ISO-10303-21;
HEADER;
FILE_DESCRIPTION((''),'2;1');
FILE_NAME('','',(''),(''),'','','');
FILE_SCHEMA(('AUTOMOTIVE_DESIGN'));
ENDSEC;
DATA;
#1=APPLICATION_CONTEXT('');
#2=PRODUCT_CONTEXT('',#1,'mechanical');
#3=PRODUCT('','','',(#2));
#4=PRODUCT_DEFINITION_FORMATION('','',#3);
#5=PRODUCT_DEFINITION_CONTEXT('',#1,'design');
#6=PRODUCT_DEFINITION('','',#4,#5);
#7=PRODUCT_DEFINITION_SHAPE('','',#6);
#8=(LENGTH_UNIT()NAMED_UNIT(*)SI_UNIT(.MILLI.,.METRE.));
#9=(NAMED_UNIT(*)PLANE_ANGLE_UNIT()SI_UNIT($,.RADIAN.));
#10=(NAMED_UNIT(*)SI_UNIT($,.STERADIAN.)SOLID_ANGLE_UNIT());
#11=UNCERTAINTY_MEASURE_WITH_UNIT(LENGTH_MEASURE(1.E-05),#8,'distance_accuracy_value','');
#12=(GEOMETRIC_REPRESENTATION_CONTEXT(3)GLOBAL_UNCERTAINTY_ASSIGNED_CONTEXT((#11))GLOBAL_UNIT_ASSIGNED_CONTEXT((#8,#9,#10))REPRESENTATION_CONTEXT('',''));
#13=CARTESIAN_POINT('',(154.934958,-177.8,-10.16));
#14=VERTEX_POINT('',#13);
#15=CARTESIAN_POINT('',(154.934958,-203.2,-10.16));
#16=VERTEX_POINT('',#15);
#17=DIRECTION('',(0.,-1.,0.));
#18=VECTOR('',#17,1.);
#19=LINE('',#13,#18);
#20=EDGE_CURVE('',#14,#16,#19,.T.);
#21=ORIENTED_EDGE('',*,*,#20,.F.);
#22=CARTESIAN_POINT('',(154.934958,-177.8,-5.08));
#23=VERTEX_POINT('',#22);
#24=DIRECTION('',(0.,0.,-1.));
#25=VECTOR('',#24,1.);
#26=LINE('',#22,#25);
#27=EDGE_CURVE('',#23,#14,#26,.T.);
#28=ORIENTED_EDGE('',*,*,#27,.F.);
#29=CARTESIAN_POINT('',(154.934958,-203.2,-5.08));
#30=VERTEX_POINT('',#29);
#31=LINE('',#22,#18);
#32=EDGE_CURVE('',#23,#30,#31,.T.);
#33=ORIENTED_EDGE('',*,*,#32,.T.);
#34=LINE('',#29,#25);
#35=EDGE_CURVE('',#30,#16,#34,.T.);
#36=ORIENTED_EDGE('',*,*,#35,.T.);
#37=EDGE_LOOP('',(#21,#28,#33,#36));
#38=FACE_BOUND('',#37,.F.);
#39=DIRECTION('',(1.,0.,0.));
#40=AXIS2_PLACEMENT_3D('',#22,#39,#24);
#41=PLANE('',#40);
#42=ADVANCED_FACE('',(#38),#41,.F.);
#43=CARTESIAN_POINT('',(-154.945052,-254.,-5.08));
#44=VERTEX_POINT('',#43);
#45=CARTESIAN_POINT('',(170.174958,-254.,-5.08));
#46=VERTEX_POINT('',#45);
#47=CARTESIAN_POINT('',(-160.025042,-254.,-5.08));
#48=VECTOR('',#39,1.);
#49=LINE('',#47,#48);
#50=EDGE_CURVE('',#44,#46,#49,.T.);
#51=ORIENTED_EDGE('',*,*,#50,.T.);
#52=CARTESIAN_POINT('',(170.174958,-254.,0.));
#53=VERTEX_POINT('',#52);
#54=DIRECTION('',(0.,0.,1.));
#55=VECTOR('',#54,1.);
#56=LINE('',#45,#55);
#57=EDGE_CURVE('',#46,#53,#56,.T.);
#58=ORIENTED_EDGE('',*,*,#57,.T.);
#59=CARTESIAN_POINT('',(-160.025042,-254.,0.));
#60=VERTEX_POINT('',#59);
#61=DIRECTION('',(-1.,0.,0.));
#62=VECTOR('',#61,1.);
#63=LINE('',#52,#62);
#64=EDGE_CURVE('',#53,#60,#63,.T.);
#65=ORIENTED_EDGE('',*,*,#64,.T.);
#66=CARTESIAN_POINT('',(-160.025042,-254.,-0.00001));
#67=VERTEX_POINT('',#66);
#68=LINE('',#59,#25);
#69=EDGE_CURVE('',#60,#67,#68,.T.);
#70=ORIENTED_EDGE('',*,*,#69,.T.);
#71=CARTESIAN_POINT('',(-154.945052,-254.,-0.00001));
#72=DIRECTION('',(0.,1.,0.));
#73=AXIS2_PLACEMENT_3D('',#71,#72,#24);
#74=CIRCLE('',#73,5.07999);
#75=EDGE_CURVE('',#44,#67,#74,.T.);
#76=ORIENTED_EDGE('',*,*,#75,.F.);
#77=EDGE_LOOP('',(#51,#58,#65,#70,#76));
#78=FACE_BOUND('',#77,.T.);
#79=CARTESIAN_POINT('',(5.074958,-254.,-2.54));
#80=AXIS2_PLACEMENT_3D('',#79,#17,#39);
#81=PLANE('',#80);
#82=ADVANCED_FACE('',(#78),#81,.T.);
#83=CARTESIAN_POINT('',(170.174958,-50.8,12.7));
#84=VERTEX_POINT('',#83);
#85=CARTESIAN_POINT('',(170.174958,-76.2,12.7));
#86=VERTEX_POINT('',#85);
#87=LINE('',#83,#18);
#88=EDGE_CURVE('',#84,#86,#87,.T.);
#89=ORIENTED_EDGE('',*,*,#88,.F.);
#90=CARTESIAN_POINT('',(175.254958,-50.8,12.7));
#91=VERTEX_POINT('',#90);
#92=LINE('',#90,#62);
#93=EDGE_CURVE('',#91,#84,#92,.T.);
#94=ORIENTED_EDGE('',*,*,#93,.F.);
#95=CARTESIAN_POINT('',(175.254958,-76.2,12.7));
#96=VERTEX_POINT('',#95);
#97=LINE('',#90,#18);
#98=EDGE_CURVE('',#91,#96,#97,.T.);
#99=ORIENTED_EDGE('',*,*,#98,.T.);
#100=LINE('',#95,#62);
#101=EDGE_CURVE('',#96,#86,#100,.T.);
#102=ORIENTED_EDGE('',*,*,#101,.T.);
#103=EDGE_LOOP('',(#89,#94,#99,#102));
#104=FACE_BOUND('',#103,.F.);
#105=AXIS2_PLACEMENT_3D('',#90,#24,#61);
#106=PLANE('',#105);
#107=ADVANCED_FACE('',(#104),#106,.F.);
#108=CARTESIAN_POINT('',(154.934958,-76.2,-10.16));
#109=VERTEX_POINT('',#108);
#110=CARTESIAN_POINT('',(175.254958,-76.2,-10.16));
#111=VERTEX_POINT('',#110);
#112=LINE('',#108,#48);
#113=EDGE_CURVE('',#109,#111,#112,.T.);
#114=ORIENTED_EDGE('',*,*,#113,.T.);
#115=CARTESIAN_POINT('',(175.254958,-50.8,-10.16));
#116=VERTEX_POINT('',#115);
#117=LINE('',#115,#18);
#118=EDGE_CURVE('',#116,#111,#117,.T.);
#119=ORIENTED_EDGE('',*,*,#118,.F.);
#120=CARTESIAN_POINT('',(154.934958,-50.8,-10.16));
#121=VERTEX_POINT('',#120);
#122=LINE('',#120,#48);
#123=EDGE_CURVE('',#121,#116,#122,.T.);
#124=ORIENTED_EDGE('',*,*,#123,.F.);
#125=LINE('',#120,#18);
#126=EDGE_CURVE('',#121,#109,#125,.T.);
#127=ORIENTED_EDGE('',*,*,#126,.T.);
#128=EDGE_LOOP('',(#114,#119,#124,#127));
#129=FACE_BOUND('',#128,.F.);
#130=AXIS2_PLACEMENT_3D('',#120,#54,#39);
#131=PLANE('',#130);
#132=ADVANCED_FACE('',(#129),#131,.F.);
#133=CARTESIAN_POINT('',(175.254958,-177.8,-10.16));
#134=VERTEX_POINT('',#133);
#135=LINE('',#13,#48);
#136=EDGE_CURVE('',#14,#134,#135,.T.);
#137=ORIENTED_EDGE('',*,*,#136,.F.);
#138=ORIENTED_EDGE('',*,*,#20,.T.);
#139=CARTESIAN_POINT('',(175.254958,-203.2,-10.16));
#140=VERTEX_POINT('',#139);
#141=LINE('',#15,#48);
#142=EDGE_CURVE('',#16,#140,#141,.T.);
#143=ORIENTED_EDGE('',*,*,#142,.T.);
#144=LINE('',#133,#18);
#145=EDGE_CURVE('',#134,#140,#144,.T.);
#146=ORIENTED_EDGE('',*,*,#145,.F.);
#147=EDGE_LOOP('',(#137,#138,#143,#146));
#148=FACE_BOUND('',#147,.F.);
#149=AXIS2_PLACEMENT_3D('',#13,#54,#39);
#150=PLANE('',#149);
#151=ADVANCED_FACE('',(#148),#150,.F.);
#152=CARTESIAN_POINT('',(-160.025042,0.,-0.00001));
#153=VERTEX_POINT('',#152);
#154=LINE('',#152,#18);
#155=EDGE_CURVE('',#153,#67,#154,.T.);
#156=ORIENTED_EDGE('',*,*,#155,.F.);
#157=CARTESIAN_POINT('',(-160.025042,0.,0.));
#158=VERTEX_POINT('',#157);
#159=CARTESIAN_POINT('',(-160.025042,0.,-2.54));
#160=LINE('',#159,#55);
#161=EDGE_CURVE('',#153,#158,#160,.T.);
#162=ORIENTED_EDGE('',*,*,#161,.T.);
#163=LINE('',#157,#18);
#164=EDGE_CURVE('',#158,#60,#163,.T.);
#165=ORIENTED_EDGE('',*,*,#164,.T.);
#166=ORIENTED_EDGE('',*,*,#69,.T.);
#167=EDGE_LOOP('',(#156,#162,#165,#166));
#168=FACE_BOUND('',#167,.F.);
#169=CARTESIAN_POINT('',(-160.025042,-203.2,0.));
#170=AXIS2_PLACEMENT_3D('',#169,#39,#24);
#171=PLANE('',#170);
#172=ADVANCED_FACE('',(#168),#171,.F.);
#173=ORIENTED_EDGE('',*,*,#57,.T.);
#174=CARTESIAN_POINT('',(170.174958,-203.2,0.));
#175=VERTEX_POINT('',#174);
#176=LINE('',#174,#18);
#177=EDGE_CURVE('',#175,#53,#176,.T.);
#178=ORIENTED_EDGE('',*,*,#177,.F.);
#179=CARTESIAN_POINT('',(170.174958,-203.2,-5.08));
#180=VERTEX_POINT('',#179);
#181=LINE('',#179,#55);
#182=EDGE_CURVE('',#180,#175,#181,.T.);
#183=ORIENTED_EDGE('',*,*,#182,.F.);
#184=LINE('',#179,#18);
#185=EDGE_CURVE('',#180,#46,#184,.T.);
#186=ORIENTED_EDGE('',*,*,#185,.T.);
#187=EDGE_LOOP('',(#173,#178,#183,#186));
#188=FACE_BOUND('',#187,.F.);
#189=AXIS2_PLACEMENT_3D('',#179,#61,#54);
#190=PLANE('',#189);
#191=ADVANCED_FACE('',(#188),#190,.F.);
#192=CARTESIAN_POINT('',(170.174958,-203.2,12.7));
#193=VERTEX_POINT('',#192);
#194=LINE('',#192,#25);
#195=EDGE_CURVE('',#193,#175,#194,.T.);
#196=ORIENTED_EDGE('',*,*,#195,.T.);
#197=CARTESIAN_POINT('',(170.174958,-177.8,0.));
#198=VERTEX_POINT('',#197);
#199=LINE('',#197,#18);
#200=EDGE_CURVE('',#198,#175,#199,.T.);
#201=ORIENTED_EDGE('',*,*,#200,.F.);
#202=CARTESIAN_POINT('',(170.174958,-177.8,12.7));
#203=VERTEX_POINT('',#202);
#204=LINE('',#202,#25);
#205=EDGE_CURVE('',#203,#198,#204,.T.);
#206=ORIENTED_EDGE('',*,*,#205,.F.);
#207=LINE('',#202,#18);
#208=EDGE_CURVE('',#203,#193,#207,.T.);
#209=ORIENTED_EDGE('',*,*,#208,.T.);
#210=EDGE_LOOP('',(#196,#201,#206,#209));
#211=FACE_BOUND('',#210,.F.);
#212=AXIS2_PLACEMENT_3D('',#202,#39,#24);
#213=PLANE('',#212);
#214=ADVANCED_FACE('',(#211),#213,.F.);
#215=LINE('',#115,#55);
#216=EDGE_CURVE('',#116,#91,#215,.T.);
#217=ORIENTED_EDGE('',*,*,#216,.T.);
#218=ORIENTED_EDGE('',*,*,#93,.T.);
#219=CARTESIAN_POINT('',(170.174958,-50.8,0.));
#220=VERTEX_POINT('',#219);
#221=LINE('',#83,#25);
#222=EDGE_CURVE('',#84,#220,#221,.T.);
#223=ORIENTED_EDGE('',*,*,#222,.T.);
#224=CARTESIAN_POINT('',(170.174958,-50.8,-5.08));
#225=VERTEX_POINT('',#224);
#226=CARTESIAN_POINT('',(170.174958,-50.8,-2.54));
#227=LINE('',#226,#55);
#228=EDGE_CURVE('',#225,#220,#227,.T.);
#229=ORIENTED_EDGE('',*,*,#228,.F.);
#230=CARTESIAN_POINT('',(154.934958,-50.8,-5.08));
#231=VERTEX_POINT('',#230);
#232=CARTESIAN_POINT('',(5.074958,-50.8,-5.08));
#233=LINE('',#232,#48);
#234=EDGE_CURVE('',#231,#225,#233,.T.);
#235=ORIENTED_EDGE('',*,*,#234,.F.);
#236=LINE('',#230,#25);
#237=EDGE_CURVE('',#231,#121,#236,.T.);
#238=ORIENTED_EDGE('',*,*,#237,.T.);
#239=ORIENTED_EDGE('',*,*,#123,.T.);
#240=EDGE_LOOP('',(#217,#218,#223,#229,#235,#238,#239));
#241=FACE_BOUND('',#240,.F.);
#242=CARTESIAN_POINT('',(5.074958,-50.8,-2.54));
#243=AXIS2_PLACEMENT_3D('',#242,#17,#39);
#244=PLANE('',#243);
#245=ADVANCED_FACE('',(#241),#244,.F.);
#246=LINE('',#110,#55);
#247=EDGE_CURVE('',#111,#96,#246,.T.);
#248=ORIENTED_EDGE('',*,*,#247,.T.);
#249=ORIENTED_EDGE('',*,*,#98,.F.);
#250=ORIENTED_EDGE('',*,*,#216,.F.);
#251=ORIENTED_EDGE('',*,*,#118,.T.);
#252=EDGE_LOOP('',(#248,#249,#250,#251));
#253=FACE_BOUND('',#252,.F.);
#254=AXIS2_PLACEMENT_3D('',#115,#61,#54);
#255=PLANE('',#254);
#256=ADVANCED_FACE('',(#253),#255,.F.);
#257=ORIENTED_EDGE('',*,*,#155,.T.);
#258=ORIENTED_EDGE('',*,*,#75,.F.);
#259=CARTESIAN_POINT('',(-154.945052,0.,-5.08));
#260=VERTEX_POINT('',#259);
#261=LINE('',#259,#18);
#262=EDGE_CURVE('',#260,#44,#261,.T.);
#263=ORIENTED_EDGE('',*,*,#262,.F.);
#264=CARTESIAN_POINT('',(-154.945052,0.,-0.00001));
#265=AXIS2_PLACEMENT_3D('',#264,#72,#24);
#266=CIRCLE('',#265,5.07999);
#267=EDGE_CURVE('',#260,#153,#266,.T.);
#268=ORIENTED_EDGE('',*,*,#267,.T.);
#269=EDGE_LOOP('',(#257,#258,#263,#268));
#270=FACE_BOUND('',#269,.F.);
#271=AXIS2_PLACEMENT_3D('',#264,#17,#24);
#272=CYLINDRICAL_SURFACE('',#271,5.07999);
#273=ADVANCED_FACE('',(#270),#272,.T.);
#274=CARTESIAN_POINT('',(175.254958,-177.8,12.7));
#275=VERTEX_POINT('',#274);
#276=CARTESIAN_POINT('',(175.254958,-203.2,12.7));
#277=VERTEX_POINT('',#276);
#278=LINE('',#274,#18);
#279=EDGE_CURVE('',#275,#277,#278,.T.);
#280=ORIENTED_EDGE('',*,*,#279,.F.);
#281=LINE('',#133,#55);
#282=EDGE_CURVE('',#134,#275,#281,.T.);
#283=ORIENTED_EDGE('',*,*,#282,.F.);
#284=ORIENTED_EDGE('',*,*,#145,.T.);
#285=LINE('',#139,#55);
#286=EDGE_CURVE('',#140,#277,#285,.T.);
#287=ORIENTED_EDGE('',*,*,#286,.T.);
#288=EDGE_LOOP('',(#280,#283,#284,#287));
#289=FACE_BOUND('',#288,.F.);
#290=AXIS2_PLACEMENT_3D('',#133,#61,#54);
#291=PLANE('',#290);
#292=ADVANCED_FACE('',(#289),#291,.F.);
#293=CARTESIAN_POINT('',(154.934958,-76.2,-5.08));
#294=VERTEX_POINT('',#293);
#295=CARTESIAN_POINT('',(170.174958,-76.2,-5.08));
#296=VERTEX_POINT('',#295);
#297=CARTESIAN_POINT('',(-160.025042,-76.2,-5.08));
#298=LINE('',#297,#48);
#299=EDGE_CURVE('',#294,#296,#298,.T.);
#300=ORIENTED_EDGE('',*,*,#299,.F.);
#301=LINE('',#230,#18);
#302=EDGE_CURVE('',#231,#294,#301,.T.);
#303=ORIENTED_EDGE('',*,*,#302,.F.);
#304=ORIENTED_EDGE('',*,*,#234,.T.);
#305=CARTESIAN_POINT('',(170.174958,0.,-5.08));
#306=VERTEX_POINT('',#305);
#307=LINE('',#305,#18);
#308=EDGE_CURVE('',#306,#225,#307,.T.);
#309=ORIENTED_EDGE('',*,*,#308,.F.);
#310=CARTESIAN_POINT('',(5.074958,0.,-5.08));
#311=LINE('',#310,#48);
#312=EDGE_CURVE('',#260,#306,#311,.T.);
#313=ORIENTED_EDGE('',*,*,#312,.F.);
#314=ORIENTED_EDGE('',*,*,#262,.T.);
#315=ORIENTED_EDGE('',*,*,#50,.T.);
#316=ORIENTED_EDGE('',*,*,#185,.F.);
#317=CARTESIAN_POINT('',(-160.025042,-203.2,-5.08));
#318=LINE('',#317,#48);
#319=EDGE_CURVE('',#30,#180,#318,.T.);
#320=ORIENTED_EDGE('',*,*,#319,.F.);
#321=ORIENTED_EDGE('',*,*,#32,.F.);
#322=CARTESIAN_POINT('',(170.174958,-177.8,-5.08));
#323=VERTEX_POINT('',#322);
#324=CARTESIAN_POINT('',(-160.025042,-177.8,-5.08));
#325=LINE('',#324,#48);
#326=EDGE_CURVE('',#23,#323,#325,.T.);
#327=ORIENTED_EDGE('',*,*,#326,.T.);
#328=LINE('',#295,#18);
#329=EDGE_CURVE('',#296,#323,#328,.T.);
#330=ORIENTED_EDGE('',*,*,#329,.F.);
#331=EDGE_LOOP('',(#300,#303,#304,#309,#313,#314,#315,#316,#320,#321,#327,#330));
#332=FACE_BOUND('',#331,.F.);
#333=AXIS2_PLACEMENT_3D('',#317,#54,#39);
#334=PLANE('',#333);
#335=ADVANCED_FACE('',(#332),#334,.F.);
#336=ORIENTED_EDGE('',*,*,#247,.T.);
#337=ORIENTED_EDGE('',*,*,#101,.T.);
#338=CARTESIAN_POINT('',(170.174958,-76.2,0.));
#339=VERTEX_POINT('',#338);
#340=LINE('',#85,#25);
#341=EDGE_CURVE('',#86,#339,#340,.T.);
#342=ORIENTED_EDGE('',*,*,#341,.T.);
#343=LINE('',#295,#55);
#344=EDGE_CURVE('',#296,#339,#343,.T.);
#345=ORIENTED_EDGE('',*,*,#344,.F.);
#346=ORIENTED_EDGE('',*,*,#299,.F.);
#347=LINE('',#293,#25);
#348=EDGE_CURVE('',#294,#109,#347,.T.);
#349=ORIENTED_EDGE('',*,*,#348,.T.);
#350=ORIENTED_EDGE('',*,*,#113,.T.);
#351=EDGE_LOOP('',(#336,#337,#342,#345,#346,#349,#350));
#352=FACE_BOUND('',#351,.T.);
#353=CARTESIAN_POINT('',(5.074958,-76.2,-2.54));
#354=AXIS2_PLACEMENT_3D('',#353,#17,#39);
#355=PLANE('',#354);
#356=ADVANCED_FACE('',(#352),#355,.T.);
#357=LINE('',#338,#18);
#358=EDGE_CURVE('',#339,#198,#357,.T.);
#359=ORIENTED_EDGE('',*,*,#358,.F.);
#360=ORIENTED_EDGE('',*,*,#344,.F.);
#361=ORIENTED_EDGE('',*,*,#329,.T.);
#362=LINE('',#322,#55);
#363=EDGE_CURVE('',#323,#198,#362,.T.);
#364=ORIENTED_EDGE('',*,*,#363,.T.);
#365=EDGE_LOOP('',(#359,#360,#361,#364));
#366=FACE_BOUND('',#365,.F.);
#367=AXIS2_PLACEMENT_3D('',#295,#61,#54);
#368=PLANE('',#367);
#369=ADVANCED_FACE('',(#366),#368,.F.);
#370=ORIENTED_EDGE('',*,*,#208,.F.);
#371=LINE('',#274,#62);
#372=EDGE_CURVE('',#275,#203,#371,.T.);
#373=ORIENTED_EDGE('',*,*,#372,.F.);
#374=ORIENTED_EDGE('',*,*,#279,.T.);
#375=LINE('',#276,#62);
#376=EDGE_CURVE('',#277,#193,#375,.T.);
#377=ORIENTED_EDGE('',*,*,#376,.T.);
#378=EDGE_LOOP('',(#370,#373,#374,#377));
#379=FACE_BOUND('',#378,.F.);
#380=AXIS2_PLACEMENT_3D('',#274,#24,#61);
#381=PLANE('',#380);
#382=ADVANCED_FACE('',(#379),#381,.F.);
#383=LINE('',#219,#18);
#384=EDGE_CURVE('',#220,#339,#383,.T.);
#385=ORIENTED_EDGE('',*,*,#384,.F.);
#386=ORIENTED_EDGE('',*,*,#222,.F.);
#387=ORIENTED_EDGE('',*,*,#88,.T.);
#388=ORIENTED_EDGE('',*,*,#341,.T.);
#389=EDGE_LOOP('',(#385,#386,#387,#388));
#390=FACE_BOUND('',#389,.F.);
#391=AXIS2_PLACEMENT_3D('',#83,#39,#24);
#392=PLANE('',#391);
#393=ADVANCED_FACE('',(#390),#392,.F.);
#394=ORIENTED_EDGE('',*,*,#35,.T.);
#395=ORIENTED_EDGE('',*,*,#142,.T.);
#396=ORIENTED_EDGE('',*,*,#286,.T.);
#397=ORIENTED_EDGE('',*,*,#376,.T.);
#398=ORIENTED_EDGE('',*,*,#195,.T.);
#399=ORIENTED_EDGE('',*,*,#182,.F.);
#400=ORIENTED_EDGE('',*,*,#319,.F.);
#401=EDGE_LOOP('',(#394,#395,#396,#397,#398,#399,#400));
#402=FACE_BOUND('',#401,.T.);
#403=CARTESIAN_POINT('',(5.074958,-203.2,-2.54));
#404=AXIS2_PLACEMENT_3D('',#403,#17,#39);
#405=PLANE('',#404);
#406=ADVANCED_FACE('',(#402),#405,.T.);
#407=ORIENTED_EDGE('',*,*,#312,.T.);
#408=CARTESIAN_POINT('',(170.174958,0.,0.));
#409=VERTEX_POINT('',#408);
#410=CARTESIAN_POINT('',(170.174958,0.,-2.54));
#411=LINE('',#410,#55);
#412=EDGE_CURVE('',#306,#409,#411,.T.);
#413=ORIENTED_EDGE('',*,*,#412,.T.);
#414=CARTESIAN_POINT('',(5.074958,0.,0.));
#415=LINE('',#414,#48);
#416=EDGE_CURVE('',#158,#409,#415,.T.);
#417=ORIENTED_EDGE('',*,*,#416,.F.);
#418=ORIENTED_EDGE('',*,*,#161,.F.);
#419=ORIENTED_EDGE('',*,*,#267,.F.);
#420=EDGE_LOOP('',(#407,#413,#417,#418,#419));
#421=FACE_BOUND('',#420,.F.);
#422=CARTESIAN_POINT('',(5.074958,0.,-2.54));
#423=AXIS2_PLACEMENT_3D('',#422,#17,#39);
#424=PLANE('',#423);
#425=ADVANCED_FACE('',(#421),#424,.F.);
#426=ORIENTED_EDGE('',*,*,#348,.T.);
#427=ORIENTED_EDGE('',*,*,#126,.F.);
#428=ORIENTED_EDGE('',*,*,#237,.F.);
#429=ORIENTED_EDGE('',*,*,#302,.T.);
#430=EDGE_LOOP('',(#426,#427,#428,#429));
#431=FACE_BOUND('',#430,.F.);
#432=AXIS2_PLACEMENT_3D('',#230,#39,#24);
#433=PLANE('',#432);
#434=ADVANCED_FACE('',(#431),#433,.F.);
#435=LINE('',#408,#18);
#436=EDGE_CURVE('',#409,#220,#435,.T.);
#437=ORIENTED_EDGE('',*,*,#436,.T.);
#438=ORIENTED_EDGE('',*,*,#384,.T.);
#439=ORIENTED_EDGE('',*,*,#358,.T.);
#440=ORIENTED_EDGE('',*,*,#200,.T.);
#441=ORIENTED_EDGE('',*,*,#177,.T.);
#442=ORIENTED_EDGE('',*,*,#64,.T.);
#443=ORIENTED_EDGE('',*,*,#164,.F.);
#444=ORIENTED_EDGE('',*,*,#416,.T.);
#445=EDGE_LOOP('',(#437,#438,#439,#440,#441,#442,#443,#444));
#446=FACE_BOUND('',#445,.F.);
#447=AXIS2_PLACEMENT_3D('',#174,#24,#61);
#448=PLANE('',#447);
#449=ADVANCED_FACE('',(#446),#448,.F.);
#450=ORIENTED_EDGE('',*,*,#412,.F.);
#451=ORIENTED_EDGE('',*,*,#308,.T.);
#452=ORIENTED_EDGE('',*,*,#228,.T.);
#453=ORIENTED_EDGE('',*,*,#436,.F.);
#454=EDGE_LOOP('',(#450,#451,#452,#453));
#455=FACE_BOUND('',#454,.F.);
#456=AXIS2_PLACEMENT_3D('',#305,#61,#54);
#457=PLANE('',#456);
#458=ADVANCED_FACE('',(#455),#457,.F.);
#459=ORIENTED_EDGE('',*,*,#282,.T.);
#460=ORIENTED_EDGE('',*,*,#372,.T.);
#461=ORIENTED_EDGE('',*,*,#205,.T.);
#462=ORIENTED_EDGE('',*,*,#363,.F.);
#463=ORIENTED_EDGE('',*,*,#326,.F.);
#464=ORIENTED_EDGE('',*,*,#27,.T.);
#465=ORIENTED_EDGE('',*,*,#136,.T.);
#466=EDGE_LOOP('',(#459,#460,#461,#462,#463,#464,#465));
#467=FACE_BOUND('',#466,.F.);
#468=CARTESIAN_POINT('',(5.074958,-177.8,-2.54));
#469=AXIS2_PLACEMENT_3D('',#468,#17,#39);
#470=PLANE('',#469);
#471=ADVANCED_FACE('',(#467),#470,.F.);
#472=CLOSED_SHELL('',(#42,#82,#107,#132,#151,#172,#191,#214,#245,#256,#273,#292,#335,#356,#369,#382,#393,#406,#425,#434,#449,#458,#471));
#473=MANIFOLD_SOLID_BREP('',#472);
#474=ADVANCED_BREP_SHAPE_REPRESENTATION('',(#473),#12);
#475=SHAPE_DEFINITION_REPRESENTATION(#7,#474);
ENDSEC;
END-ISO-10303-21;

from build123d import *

# Parameters (mm, degrees)
F0_W     = 330.2
F0_H     = 5.08
F1_DEPTH = 50.8
F3_DEPTH = 25.4
F5_DEPTH = 101.6
F7_DEPTH = 25.4
F9_DEPTH = 50.8
F10_R    = 5.07999


# Not quite as in the source:
# - a fillet or chamfer is up to 0.001 mm smaller than in the source, because OpenCascade refuses the exact size


with BuildPart() as f1:
    # F0 (on Front) → F1 (new body)
    with BuildSketch(Plane.XZ):
        with Locations((5.0749575138, -2.54)):
            Rectangle(F0_W, F0_H)
    extrude(amount=F1_DEPTH)

    # F2 (on face) → F3 (join)
    with BuildSketch(Plane.XZ.offset(50.8)):
        Polygon((170.1749575138, -5.08), (170.1749575138, 0), (-160.0250424862, 0), (-160.0250424862, -5.08), (154.9349575138, -5.08), align=None)
        Polygon((170.1749575138, 12.7), (170.1749575138, 0), (170.1749575138, -5.08), (154.9349575138, -5.08), (154.9349575138, -10.16), (175.2549575138, -10.16), (175.2549575138, 12.7), align=None)
    extrude(amount=F3_DEPTH)

    # F4 (on face) → F5 (join)
    with BuildSketch(Plane.XZ.offset(76.2)):
        Polygon((170.1749575138, 0), (-160.0250424862, 0), (-160.0250424862, -5.08), (154.9349575138, -5.08), (170.1749575138, -5.08), align=None)
    extrude(amount=F5_DEPTH)

    # F6 (on face) → F7 (join)
    with BuildSketch(Plane.XZ.offset(177.8)):
        Polygon((170.1749575138, -5.08), (170.1749575138, 0), (-160.0250424862, 0), (-160.0250424862, -5.08), (154.9349575138, -5.08), align=None)
        Polygon((170.1749575138, 12.7), (170.1749575138, 0), (170.1749575138, -5.08), (154.9349575138, -5.08), (154.9349575138, -10.16), (175.2549575138, -10.16), (175.2549575138, 12.7), align=None)
    extrude(amount=F7_DEPTH)

    # F8 (on face) → F9 (join)
    with BuildSketch(Plane.XZ.offset(203.2)):
        Polygon((170.1749575138, 0), (-160.0250424862, 0), (-160.0250424862, -5.08), (154.9349575138, -5.08), (170.1749575138, -5.08), align=None)
    extrude(amount=F9_DEPTH)

    # F10 (radius 5.08 in the source; OpenCascade refuses exactly that, so slightly less here)
    f10_edges = [f1.edges().sort_by_distance(p)[0] for p in [
        (-160.025042, -127, -5.08),
    ]]
    fillet(f10_edges, radius=F10_R)


solid = f1.part
